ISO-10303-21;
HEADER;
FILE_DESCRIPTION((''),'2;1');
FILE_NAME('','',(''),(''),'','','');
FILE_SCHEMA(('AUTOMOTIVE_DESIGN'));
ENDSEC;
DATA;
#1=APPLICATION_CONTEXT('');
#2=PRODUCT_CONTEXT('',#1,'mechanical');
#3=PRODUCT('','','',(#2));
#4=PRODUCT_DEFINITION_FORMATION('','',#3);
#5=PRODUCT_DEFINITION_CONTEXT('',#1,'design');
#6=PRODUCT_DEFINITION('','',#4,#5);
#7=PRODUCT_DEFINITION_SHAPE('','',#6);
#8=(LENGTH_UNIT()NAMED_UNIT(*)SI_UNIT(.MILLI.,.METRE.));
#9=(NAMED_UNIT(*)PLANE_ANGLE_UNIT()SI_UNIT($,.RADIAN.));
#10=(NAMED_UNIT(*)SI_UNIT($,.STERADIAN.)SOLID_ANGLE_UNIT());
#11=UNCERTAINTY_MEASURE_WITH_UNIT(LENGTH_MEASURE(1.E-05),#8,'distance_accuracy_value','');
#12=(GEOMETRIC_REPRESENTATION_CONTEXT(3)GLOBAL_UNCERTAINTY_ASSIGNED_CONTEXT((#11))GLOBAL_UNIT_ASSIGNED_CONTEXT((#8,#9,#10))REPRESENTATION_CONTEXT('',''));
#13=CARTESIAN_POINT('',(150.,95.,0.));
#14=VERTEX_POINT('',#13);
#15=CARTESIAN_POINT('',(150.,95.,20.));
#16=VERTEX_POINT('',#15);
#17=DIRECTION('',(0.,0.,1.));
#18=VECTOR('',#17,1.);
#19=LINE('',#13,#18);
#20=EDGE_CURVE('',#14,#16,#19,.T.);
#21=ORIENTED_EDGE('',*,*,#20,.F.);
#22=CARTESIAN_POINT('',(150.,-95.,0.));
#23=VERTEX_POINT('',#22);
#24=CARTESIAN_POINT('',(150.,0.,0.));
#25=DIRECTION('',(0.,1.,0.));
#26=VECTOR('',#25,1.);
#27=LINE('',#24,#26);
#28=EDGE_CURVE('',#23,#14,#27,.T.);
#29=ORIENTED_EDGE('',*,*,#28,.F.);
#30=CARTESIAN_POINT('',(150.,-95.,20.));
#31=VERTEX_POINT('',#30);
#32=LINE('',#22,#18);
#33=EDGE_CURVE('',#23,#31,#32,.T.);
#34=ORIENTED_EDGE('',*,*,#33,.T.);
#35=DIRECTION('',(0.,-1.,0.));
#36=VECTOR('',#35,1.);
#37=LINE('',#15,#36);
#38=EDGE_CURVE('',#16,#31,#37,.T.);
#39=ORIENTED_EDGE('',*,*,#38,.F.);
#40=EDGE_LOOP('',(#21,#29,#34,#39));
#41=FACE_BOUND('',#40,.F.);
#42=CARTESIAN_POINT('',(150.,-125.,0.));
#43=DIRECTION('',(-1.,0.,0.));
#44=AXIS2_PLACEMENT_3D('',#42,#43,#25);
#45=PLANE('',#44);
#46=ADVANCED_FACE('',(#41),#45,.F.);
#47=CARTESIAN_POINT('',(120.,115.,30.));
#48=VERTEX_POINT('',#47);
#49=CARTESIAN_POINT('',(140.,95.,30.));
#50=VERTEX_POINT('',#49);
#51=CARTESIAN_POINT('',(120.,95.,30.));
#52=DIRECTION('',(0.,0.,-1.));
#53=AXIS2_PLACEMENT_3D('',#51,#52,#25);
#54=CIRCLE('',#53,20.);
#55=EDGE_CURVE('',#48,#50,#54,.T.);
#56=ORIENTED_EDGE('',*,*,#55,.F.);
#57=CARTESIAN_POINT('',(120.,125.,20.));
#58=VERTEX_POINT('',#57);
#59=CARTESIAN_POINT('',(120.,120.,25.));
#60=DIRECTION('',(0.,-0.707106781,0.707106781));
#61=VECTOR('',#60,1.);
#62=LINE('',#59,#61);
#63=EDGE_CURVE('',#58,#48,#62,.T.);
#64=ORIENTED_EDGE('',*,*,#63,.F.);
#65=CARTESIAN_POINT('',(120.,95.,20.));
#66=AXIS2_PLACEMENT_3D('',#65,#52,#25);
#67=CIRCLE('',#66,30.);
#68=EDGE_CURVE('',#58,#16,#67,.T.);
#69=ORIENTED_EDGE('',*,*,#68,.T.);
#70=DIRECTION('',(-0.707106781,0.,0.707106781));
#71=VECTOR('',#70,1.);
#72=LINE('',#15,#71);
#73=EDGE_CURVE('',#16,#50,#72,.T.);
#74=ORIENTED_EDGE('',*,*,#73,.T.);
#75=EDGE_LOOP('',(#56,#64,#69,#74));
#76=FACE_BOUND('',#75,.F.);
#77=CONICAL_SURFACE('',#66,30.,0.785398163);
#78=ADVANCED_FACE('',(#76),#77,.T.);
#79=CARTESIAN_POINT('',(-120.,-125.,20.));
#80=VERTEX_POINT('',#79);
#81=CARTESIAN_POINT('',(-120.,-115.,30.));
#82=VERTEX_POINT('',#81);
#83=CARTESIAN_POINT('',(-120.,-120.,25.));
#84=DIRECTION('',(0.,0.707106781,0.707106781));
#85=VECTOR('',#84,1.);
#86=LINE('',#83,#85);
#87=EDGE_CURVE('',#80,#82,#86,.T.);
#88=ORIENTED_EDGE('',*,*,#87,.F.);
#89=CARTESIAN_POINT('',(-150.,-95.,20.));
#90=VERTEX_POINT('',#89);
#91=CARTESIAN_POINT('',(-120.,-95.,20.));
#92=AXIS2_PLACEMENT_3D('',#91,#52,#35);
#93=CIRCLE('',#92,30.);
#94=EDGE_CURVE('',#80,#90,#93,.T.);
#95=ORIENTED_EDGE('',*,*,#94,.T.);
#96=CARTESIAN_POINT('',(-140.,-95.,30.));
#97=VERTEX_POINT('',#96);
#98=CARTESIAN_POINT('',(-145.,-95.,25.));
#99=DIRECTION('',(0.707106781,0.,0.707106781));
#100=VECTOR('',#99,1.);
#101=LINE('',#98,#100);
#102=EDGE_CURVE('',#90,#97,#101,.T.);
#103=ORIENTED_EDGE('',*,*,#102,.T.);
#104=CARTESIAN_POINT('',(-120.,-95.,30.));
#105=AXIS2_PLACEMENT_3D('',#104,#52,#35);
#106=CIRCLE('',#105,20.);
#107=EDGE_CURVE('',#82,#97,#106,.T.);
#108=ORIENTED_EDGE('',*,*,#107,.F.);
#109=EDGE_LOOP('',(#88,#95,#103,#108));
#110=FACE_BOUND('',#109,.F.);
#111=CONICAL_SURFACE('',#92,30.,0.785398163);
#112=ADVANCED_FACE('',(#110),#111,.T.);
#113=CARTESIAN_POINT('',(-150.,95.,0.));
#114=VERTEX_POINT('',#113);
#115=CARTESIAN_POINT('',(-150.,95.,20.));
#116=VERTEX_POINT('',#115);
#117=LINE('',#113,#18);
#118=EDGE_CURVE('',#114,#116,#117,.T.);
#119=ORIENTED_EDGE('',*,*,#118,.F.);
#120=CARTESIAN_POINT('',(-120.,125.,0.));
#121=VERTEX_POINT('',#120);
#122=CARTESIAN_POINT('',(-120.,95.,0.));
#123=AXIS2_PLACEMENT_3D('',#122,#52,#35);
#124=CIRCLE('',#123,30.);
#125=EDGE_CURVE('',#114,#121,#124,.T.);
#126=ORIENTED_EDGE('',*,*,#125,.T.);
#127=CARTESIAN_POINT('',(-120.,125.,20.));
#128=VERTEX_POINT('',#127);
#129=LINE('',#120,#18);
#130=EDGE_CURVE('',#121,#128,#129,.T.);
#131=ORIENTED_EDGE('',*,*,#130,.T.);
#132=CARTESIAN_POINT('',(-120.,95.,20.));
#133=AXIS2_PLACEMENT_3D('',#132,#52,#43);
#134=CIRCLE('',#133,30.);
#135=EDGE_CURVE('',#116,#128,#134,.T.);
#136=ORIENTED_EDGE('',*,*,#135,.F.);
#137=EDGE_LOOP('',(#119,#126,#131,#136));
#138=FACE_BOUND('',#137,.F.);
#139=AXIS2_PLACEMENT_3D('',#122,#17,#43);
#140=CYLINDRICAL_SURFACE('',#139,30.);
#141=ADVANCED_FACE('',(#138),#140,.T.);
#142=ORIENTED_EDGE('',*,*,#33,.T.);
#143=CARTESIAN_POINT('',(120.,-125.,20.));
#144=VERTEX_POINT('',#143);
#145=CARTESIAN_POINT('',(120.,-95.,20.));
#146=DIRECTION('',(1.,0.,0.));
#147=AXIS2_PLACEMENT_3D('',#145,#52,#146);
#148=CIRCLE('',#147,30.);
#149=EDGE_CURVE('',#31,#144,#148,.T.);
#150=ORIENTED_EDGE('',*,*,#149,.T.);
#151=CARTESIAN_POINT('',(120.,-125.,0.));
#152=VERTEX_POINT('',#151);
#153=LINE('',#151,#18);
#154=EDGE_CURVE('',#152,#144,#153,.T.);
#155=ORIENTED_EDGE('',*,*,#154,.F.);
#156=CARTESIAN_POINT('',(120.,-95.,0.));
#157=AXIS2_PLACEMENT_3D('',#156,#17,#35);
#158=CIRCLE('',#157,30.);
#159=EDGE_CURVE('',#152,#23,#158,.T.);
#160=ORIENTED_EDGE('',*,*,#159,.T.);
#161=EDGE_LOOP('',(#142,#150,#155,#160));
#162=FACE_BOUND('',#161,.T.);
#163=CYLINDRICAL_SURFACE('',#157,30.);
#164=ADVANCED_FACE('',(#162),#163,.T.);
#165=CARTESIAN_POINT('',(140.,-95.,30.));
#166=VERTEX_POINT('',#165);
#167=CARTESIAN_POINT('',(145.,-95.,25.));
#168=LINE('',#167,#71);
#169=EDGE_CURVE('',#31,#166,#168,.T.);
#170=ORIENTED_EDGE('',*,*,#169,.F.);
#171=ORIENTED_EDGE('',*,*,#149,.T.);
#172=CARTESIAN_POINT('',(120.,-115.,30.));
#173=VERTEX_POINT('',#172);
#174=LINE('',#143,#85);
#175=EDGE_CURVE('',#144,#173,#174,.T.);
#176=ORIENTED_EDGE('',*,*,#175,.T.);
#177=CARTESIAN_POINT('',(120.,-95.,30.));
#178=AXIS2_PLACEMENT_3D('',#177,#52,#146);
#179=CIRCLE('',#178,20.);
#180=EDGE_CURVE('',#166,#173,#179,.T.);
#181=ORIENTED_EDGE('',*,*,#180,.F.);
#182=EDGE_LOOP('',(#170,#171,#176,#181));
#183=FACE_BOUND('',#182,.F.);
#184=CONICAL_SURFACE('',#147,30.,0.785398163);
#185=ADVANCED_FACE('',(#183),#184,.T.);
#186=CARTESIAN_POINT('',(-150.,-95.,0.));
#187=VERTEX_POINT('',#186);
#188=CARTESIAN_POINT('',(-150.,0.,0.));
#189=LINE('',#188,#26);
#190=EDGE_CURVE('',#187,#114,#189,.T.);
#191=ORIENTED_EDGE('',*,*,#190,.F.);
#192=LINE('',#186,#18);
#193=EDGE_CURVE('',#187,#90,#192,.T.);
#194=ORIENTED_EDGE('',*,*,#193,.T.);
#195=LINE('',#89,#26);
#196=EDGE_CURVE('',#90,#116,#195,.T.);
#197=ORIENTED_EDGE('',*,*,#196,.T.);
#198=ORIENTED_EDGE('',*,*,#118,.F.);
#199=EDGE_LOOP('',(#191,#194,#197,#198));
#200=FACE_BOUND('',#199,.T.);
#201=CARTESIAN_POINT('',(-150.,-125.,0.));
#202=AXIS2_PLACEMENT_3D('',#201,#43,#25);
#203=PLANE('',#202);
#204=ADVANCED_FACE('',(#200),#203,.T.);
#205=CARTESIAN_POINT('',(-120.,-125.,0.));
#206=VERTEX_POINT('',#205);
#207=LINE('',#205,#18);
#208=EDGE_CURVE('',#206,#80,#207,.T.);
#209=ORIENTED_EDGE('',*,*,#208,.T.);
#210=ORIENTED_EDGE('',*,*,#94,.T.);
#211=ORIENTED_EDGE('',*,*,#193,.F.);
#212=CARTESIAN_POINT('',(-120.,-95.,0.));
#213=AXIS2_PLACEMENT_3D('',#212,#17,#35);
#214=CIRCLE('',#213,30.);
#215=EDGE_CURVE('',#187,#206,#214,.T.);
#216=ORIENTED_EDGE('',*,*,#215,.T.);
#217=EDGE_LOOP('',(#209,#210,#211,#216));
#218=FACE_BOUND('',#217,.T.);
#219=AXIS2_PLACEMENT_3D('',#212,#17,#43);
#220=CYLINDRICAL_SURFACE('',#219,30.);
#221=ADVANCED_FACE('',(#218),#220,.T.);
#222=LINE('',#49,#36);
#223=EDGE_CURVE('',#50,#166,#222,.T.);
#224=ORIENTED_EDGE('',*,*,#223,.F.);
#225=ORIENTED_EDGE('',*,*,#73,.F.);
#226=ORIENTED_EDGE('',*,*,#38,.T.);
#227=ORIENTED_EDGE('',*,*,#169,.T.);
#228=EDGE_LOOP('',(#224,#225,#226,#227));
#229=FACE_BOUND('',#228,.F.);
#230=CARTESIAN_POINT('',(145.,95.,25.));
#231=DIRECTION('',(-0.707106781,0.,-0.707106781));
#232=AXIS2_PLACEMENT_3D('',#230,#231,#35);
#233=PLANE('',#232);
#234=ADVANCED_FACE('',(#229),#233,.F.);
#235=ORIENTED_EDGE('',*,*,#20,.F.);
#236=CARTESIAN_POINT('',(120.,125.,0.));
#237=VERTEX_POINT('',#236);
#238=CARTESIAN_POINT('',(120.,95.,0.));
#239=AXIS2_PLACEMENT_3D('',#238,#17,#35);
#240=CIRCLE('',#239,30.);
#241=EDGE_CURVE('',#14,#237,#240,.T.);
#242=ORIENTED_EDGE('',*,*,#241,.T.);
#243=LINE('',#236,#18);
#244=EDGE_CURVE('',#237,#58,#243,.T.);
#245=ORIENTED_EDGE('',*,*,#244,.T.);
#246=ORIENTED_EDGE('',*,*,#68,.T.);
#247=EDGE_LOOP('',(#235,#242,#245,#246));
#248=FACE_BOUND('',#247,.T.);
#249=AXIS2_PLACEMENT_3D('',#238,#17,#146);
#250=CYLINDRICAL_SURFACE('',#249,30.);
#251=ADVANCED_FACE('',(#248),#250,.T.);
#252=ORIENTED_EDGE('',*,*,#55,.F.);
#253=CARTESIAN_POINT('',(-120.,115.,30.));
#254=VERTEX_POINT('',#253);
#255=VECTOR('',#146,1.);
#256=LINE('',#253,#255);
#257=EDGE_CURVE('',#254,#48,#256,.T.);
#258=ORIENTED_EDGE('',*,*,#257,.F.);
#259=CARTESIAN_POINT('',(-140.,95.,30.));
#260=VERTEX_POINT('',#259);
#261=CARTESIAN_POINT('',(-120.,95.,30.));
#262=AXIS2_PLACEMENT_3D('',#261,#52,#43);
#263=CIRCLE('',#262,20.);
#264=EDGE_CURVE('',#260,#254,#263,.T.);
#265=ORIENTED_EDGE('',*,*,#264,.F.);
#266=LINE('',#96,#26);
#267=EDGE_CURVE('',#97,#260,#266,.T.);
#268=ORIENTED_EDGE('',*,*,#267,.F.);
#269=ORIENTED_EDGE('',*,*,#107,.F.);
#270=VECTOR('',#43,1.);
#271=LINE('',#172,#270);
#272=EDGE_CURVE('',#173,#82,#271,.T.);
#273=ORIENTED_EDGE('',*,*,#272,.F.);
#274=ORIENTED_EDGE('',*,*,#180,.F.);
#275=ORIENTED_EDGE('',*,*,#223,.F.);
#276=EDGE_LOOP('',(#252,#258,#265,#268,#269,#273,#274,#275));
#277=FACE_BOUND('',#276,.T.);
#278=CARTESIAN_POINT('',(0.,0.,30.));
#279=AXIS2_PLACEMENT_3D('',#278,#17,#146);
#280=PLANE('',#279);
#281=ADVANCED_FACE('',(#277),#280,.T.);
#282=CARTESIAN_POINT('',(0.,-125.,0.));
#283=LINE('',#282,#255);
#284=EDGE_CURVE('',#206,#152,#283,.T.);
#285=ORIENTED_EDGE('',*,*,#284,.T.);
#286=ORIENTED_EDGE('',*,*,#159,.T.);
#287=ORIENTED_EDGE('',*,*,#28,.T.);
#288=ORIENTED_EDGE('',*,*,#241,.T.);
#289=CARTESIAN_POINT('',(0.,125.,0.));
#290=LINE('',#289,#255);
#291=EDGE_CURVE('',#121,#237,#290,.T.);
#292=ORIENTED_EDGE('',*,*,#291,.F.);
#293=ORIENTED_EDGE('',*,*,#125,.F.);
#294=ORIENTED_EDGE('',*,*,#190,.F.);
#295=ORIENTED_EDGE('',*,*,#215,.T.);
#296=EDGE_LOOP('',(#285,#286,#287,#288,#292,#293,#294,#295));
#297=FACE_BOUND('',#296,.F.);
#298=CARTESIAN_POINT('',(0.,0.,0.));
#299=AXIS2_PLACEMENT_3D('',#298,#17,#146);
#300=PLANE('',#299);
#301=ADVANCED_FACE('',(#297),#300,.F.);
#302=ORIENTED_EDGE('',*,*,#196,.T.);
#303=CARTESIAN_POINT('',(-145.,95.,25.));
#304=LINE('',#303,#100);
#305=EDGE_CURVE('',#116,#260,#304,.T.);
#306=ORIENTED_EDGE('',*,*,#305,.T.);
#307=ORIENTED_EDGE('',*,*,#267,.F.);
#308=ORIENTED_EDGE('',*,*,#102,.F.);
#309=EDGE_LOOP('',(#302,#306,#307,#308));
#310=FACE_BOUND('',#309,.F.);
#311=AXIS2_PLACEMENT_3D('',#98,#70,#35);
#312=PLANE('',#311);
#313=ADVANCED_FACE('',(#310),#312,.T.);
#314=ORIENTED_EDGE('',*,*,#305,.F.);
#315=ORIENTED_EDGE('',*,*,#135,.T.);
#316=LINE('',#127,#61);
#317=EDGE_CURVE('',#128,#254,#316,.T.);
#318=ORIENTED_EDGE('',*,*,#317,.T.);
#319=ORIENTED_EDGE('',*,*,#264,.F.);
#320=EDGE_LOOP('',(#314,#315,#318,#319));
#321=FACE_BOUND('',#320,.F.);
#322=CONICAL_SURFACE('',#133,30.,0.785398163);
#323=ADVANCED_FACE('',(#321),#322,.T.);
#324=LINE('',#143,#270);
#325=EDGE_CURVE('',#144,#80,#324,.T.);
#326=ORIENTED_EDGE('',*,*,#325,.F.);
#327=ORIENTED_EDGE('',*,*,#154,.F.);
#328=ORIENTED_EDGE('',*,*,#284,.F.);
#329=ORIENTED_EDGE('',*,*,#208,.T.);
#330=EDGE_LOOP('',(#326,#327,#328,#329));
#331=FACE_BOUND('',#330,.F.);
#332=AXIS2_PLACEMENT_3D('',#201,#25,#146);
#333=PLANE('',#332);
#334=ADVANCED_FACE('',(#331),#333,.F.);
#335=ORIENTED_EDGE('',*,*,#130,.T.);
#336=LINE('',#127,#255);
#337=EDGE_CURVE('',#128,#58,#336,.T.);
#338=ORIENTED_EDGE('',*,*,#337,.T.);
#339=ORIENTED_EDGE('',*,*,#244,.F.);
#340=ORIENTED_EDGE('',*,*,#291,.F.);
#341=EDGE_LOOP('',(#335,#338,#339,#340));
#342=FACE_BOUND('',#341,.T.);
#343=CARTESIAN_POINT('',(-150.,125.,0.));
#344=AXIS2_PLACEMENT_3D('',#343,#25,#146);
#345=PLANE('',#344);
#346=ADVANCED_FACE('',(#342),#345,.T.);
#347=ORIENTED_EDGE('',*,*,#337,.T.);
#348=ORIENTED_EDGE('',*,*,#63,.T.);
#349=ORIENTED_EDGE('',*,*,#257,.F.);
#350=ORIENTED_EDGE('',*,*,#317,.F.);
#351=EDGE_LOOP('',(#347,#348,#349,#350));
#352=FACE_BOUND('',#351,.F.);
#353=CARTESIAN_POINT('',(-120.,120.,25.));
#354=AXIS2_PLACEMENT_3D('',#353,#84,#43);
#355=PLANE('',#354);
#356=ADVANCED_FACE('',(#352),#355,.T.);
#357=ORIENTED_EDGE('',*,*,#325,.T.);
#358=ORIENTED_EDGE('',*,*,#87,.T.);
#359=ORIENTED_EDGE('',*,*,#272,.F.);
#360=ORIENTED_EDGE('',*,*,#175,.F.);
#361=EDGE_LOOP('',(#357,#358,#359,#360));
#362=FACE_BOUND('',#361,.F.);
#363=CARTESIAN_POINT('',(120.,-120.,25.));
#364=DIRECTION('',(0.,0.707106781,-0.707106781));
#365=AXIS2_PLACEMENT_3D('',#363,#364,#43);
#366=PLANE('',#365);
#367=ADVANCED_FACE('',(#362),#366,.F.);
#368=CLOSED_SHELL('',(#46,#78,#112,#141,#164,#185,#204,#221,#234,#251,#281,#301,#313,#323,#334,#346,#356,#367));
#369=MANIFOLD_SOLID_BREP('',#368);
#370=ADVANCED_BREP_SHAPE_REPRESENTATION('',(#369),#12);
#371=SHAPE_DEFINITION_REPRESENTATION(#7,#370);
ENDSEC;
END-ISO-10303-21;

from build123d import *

# Parameters (mm, degrees)
F0_W     = 300
F0_H     = 250
F1_DEPTH = 30
F2_R     = 30
F3_SIZE2 = 10
F3_SIZE  = 10


with BuildPart() as f1:
    # F0 (on Top) → F1 (new body)
    with BuildSketch(Plane.XY):
        Rectangle(F0_W, F0_H)
    extrude(amount=F1_DEPTH)

    # F2
    f2_edges = [f1.edges().sort_by_distance(p)[0] for p in [
        (-150, -125, 15),
        (-150, 125, 15),
        (150, 125, 15),
        (150, -125, 15),
    ]]
    fillet(f2_edges, radius=F2_R)

    # F3
    f3_edges = [f1.edges().sort_by_distance(p)[0] for p in [
        (-150, 0, 30),
        (0, 125, 30),
        (150, 0, 30),
        (0, -125, 30),
        (141.213203, -116.213203, 30),
        (141.213203, 116.213203, 30),
        (-141.213203, -116.213203, 30),
        (-141.213203, 116.213203, 30),
    ]]
    chamfer(f3_edges, length=F3_SIZE, length2=F3_SIZE2)


solid = f1.part
